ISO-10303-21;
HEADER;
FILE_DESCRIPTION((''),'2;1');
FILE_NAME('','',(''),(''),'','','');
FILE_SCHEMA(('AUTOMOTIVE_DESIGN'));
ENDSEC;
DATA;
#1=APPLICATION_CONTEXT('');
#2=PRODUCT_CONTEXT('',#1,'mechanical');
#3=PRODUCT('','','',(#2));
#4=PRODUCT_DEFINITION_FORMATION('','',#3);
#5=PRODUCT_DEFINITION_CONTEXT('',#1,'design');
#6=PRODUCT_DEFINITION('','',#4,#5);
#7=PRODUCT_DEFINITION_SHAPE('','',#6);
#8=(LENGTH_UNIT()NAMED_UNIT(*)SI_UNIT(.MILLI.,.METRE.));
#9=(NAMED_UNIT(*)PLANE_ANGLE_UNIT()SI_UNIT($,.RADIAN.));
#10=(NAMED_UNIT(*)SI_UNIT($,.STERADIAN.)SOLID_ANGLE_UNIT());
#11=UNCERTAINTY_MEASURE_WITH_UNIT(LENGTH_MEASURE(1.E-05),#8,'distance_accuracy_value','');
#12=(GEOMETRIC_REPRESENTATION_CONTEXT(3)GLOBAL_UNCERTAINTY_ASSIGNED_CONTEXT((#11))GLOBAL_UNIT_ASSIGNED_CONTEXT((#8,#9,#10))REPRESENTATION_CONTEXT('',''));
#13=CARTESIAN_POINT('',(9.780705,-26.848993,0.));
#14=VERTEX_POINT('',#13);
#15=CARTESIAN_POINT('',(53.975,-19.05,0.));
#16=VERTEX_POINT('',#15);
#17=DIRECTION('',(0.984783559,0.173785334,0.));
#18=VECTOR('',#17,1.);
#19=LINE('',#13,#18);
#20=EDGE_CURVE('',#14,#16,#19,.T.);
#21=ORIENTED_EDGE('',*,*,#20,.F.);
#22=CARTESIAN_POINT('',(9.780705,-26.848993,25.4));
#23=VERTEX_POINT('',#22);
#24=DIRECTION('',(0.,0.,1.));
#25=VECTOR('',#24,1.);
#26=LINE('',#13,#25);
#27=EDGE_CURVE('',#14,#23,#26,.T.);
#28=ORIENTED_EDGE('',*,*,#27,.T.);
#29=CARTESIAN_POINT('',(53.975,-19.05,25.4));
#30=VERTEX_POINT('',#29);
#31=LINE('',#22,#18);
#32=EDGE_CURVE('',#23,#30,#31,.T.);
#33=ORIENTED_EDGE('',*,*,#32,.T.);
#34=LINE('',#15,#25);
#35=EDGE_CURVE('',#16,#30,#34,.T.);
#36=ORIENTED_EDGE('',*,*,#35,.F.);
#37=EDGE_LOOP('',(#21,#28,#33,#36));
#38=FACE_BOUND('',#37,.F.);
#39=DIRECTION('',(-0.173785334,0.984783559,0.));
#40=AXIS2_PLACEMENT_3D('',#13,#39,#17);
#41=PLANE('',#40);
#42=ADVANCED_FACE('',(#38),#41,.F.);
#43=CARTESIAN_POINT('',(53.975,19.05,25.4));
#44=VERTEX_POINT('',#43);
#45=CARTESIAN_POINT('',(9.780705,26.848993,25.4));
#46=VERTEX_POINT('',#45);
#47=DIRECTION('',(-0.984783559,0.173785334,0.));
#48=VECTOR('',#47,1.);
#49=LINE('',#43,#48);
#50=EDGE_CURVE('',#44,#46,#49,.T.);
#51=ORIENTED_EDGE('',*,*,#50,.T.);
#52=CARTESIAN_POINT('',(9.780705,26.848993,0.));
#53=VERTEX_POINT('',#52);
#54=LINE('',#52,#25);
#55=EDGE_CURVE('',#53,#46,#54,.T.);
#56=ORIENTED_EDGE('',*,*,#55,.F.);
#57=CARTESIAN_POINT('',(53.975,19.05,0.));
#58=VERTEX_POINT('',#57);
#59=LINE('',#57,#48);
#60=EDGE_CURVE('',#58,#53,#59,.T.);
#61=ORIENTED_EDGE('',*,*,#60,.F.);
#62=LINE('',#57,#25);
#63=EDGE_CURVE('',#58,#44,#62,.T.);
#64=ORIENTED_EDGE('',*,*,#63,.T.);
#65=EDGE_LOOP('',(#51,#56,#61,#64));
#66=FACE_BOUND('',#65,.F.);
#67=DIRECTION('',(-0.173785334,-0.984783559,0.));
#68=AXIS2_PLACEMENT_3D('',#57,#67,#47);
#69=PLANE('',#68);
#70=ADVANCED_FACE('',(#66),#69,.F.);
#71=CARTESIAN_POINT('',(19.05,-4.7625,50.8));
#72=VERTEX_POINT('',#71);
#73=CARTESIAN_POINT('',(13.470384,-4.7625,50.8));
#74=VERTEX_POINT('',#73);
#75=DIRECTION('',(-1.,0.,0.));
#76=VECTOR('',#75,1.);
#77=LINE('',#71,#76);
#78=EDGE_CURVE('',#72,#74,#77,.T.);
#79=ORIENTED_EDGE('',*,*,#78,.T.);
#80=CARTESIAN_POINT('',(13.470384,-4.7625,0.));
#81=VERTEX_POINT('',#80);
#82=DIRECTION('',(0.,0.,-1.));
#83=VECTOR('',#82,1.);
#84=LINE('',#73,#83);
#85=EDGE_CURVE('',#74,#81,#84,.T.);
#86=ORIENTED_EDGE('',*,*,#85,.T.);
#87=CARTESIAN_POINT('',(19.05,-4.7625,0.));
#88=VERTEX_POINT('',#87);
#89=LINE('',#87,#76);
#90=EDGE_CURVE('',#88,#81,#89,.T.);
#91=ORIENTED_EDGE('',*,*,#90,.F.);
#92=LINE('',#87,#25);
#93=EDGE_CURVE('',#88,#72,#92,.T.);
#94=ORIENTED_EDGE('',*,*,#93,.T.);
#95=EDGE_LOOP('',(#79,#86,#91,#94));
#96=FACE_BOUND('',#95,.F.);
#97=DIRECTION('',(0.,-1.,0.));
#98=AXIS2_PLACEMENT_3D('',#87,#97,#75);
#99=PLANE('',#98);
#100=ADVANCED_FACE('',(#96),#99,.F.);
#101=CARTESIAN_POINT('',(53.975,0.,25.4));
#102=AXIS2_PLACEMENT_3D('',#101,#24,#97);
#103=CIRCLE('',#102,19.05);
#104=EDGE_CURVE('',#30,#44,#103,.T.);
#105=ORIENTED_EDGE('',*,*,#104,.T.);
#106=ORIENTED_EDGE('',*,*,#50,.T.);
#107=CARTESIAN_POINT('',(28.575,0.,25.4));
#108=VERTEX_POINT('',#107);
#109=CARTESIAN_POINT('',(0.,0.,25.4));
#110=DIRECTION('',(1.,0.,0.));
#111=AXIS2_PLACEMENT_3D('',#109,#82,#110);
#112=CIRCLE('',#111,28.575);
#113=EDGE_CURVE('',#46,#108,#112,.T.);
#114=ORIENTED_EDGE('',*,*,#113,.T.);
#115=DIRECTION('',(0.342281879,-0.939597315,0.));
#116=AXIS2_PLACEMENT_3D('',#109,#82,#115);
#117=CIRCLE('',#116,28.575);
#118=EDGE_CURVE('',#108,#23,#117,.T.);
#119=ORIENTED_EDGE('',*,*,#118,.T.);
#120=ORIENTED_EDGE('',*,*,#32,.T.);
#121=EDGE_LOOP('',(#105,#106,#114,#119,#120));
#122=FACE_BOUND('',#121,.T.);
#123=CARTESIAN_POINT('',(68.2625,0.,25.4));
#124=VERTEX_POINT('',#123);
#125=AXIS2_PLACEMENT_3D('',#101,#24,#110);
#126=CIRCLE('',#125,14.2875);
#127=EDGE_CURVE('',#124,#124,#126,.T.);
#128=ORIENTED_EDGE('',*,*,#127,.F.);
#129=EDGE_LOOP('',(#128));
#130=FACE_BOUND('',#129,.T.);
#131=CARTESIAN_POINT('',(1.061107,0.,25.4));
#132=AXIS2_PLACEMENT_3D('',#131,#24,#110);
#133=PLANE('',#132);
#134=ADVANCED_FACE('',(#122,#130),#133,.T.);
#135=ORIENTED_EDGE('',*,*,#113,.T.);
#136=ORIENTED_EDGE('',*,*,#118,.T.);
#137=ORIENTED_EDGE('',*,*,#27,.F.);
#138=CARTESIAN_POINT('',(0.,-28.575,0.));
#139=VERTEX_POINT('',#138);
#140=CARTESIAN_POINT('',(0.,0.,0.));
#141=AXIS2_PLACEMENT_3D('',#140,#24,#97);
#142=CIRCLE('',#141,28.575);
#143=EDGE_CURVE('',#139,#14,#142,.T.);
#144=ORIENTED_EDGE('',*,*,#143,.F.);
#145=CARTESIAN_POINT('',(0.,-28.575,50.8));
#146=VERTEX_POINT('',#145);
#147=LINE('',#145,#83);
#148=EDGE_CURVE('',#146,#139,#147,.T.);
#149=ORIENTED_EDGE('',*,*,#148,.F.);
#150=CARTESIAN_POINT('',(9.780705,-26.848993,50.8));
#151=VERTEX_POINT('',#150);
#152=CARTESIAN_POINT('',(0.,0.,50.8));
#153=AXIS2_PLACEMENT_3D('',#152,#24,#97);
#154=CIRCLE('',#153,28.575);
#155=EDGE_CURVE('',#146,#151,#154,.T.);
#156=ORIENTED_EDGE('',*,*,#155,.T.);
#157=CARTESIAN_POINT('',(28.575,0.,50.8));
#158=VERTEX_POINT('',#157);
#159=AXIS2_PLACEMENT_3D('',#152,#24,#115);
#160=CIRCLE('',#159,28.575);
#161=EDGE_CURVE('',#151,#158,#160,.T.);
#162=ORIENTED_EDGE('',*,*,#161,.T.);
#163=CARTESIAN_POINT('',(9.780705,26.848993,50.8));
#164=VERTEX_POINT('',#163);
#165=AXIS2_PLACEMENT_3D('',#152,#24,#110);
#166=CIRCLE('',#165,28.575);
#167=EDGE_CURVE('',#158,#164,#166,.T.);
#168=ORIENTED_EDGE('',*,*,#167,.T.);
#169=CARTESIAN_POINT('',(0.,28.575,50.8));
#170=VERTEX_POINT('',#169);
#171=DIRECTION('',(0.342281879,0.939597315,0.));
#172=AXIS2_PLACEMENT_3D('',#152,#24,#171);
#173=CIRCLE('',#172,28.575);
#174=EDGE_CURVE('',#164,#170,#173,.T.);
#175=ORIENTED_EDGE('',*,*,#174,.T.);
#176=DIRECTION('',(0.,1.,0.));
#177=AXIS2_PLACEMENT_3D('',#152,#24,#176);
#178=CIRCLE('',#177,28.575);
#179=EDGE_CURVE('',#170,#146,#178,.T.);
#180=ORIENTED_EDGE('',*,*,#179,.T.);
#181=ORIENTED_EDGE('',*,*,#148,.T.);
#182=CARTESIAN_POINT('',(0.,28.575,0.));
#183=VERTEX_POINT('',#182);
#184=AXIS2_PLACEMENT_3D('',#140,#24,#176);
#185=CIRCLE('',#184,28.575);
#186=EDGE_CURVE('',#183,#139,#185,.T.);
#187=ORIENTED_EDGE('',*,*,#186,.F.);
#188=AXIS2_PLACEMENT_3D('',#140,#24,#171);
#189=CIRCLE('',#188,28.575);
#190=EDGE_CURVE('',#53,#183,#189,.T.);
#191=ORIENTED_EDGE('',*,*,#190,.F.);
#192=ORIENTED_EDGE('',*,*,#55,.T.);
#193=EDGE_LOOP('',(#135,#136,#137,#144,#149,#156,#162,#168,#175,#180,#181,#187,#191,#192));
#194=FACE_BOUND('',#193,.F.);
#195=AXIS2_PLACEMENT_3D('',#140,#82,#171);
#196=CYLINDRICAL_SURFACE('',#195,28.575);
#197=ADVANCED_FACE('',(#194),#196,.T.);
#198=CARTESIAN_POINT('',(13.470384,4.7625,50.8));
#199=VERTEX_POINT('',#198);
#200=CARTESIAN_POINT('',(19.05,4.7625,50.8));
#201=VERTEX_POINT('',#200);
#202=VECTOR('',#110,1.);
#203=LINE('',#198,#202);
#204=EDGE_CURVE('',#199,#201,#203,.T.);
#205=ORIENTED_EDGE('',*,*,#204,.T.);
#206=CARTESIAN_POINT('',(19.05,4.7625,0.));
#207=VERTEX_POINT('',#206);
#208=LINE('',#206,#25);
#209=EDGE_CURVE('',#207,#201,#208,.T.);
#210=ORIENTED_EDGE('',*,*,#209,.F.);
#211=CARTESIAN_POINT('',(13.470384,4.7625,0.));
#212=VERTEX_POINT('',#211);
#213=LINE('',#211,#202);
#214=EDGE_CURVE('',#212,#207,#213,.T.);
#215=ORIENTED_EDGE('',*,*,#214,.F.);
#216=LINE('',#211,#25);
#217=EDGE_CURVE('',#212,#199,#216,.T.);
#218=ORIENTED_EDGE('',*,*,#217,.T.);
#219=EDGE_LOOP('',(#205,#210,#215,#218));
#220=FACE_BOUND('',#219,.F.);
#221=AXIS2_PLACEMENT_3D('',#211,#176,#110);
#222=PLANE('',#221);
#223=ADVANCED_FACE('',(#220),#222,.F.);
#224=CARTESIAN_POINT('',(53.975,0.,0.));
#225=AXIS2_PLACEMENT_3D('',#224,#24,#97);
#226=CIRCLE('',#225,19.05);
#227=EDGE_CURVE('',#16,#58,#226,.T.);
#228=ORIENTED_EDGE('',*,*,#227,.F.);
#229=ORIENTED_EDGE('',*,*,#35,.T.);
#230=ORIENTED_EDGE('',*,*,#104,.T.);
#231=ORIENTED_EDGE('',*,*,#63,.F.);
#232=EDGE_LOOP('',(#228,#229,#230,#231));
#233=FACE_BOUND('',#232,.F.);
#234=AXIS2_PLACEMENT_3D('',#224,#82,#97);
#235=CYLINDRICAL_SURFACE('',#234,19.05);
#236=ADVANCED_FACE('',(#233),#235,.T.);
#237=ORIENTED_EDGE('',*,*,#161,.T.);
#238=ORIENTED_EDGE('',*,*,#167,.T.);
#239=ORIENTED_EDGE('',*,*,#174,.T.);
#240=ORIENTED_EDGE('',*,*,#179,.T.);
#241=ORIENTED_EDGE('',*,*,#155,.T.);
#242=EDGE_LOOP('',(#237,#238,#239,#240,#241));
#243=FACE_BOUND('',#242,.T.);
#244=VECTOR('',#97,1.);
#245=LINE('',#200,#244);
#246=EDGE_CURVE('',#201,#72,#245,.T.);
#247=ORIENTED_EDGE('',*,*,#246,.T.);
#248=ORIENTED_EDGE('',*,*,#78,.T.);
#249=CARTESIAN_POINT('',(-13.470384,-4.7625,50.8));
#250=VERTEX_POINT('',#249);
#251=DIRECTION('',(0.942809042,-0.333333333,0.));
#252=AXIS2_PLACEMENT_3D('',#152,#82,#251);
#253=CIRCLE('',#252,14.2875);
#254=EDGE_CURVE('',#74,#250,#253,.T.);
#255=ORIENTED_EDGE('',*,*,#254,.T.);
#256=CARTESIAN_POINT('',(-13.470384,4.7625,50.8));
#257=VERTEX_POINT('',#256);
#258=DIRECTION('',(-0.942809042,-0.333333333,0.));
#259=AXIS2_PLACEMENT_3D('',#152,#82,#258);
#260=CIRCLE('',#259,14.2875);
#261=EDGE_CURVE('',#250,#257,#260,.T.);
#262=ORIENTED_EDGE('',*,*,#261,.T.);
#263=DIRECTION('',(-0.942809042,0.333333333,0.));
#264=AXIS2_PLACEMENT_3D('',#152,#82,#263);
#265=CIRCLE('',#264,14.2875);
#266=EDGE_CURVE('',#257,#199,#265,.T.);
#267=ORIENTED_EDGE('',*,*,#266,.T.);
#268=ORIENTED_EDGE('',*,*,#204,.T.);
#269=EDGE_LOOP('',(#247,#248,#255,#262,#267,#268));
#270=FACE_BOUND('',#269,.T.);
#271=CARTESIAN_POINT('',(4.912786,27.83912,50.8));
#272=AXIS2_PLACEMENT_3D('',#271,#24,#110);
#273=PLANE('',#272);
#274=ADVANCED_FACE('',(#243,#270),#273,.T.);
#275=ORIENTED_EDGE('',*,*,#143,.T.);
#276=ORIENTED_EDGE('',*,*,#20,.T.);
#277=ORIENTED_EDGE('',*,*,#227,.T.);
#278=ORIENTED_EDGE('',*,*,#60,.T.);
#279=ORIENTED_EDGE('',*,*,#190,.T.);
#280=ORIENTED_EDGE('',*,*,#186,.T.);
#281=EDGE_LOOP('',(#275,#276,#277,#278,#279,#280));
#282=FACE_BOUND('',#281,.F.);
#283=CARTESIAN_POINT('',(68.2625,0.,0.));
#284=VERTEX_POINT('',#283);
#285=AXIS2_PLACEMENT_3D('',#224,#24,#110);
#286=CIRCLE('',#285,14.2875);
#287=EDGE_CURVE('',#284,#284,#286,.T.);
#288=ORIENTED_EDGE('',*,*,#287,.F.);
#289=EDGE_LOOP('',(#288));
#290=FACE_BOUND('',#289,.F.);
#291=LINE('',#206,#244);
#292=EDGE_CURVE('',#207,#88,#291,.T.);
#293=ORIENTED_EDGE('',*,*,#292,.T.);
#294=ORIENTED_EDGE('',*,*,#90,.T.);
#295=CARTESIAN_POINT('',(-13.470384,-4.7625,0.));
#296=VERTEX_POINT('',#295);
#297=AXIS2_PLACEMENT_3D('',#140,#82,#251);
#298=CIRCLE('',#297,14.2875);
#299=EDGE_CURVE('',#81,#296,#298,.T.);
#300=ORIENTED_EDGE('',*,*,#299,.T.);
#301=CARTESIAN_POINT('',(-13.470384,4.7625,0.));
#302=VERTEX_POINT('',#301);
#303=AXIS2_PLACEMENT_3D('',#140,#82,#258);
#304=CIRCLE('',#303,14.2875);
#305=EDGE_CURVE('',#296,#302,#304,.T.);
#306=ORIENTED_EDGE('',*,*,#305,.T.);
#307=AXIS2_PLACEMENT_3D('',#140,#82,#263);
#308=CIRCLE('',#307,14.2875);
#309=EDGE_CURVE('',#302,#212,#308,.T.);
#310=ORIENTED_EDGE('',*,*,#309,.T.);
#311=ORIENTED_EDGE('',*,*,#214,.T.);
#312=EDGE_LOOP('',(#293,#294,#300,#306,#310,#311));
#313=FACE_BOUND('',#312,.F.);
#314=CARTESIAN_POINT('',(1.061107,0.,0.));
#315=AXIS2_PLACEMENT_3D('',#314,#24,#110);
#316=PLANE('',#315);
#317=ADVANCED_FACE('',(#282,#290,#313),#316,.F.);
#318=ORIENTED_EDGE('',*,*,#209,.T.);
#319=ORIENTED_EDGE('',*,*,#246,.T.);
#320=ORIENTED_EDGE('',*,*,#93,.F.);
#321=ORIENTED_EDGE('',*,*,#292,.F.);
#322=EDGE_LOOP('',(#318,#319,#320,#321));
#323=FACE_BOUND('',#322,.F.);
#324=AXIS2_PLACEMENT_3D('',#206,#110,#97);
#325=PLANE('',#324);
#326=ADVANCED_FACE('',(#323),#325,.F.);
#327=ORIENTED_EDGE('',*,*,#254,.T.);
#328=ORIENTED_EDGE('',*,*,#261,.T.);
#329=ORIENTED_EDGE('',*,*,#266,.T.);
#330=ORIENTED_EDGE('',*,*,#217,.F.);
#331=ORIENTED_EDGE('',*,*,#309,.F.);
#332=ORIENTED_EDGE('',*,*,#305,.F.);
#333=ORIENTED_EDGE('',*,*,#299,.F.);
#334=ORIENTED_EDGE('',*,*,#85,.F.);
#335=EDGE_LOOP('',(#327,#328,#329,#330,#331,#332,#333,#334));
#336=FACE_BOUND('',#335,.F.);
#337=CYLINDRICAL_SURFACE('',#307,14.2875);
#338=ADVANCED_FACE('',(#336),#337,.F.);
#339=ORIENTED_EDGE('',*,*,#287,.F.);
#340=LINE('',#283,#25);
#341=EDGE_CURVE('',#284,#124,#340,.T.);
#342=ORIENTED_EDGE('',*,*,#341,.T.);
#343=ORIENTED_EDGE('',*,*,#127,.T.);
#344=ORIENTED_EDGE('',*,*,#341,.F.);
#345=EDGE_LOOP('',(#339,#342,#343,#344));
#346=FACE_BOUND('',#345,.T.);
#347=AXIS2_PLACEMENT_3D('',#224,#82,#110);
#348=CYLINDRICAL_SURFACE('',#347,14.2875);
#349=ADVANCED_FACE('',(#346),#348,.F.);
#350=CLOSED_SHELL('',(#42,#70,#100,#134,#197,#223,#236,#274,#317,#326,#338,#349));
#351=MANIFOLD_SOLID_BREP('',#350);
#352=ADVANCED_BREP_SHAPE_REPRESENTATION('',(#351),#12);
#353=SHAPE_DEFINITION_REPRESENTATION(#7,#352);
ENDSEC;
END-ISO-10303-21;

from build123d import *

# Parameters (mm, degrees)
F0_R     = 14.2875
F1_DEPTH = 25.4
F2_DEPTH = 50.8


with BuildPart() as f1:
    # F0 (on Top) → F1 (new body)
    with BuildSketch(Plane.XY):
        with BuildLine():
            Line((9.780704698, 26.8489932886), (0, 28.575))
            ThreePointArc((0, 28.575), (-28.575, 0), (0, -28.575))
            Line((0, -28.575), (9.780704698, -26.8489932886))
            ThreePointArc((9.780704698, -26.8489932886), (23.4095521288, -16.3866864902), (28.575, 0))
            ThreePointArc((28.575, 0), (23.4095521288, 16.3866864902), (9.780704698, 26.8489932886))
        make_face()
        with BuildLine():
            ThreePointArc((-13.4703841816, 4.7625), (0, 14.2875), (13.4703841816, 4.7625))
            Line((13.4703841816, 4.7625), (19.05, 4.7625))
            Line((19.05, 4.7625), (19.05, -4.7625))
            Line((19.05, -4.7625), (13.4703841816, -4.7625))
            ThreePointArc((13.4703841816, -4.7625), (0, -14.2875), (-13.4703841816, -4.7625))
            Line((-13.4703841816, -4.7625), (-19.05, -4.7625))
            Line((-19.05, -4.7625), (-19.05, 4.7625))
            Line((-19.05, 4.7625), (-13.4703841816, 4.7625))
        make_face(mode=Mode.SUBTRACT)
        with BuildLine():
            ThreePointArc((9.780704698, 26.8489932886), (4.9659159165, 28.1401901932), (0, 28.575))
            Line((0, 28.575), (9.780704698, 26.8489932886))
        make_face()
        with BuildLine():
            Line((53.975, 19.05), (9.780704698, 26.8489932886))
            ThreePointArc((9.780704698, 26.8489932886), (23.4095521288, 16.3866864902), (28.575, 0))
            ThreePointArc((28.575, 0), (23.4095521288, -16.3866864902), (9.780704698, -26.8489932886))
            Line((9.780704698, -26.8489932886), (53.975, -19.05))
            ThreePointArc((53.975, -19.05), (34.925, 0), (53.975, 19.05))
        make_face()
        with BuildLine():
            ThreePointArc((73.025, 0), (67.4453841816, 13.4703841816), (53.975, 19.05))
            ThreePointArc((53.975, 19.05), (34.925, 0), (53.975, -19.05))
            ThreePointArc((53.975, -19.05), (67.4453841816, -13.4703841816), (73.025, 0))
        make_face()
        with Locations((53.975, 0)):
            Circle(F0_R, mode=Mode.SUBTRACT)
        with BuildLine():
            ThreePointArc((-13.4703841816, -4.7625), (-14.2875, 0), (-13.4703841816, 4.7625))
            Line((-13.4703841816, 4.7625), (-19.05, 4.7625))
            Line((-19.05, 4.7625), (-19.05, -4.7625))
            Line((-19.05, -4.7625), (-13.4703841816, -4.7625))
        make_face()
    extrude(amount=F1_DEPTH)

    # F0 (on Top) → F2 (join)
    with BuildSketch(Plane.XY):
        with BuildLine():
            ThreePointArc((9.780704698, 26.8489932886), (4.9659159165, 28.1401901932), (0, 28.575))
            Line((0, 28.575), (9.780704698, 26.8489932886))
        make_face()
        with BuildLine():
            Line((9.780704698, -26.8489932886), (0, -28.575))
            ThreePointArc((0, -28.575), (4.9659159165, -28.1401901932), (9.780704698, -26.8489932886))
        make_face()
        with BuildLine():
            Line((9.780704698, 26.8489932886), (0, 28.575))
            ThreePointArc((0, 28.575), (-28.575, 0), (0, -28.575))
            Line((0, -28.575), (9.780704698, -26.8489932886))
            ThreePointArc((9.780704698, -26.8489932886), (23.4095521288, -16.3866864902), (28.575, 0))
            ThreePointArc((28.575, 0), (23.4095521288, 16.3866864902), (9.780704698, 26.8489932886))
        make_face()
        with BuildLine():
            ThreePointArc((-13.4703841816, 4.7625), (0, 14.2875), (13.4703841816, 4.7625))
            Line((13.4703841816, 4.7625), (19.05, 4.7625))
            Line((19.05, 4.7625), (19.05, -4.7625))
            Line((19.05, -4.7625), (13.4703841816, -4.7625))
            ThreePointArc((13.4703841816, -4.7625), (0, -14.2875), (-13.4703841816, -4.7625))
            Line((-13.4703841816, -4.7625), (-19.05, -4.7625))
            Line((-19.05, -4.7625), (-19.05, 4.7625))
            Line((-19.05, 4.7625), (-13.4703841816, 4.7625))
        make_face(mode=Mode.SUBTRACT)
        with BuildLine():
            ThreePointArc((-13.4703841816, -4.7625), (-14.2875, 0), (-13.4703841816, 4.7625))
            Line((-13.4703841816, 4.7625), (-19.05, 4.7625))
            Line((-19.05, 4.7625), (-19.05, -4.7625))
            Line((-19.05, -4.7625), (-13.4703841816, -4.7625))
        make_face()
    extrude(amount=F2_DEPTH)


solid = f1.part
